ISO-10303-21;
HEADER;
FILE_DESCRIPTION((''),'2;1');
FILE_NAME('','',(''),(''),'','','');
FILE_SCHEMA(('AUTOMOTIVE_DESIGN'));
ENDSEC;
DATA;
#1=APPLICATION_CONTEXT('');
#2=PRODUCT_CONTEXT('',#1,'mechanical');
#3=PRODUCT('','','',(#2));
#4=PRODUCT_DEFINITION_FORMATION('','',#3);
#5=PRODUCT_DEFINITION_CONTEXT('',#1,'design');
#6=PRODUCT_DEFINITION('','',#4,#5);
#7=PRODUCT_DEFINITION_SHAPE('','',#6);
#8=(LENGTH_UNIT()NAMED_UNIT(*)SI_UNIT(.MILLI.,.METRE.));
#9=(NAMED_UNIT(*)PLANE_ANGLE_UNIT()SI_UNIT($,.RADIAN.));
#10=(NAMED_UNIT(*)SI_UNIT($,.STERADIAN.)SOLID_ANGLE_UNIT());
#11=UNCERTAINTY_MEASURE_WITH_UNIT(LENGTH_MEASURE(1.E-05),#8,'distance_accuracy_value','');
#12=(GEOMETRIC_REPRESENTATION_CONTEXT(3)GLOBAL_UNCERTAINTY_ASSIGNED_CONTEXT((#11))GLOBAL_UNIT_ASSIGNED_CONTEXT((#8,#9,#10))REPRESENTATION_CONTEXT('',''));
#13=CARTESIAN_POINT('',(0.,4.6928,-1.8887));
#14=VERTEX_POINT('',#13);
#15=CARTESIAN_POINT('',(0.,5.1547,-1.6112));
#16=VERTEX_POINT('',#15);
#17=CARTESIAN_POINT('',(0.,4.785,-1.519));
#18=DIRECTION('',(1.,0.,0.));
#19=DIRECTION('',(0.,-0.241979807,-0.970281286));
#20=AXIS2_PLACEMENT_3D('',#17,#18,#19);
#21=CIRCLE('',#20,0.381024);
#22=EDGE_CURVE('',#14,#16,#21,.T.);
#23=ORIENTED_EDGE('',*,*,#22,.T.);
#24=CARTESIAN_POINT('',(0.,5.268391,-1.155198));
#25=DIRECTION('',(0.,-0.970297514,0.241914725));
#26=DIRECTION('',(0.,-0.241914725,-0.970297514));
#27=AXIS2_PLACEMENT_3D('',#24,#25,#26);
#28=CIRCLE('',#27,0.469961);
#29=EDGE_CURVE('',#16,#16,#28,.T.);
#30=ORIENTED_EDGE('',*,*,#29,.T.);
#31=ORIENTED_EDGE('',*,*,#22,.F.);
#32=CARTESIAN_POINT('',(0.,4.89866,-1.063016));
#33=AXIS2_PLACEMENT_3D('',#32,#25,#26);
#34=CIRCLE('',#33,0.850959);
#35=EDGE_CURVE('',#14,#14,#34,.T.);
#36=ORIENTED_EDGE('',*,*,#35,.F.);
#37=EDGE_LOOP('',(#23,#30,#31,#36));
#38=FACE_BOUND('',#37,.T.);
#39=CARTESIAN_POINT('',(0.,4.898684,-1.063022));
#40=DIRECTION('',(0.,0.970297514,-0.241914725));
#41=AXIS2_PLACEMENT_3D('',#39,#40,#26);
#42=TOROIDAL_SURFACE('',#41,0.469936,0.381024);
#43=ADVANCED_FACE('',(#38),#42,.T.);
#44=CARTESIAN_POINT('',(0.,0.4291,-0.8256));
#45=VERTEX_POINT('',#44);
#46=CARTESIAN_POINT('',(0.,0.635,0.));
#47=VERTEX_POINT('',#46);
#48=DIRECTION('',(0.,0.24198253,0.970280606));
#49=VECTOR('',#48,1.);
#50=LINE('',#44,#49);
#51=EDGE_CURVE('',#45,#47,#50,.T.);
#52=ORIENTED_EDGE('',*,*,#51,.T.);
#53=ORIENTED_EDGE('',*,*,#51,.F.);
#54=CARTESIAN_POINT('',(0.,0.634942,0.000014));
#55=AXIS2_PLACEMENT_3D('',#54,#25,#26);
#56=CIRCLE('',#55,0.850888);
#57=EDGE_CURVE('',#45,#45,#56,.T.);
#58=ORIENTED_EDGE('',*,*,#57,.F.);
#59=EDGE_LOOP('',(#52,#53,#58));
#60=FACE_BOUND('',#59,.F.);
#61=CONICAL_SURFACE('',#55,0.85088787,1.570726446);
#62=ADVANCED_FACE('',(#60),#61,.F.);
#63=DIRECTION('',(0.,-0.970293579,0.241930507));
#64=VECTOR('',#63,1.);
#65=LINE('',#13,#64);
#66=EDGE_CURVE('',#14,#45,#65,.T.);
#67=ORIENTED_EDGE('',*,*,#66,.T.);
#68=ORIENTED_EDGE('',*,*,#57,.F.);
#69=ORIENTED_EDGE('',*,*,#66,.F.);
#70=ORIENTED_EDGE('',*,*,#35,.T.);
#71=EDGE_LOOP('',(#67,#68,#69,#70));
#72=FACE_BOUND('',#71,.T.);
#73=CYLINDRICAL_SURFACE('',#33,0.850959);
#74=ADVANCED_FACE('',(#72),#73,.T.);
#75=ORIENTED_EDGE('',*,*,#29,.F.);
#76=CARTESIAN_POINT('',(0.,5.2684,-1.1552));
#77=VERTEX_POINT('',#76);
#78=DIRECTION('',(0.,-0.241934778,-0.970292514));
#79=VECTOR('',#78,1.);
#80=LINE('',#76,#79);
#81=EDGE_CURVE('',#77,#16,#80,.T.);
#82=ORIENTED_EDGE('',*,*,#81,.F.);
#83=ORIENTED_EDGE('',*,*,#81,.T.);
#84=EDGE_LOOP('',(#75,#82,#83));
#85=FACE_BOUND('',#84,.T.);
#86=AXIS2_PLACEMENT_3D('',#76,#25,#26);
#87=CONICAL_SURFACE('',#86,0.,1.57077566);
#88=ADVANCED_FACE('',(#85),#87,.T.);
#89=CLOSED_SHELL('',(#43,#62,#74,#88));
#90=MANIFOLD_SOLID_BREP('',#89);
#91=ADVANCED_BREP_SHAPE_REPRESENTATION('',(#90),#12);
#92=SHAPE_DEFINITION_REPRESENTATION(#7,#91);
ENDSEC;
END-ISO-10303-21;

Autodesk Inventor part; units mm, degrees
sketch "Sketch_1" plane through (0, 0, 0) normal (1, 0, 0) x (0, 1, 0)
  line L0 (0.635, 0) -> (5.2684, -1.1552)
  line L1 (5.2684, -1.1552) -> (5.1547, -1.6112)
  arc A0 (4.6928, -1.8887) -> (5.1547, -1.6112) centre (4.785, -1.519) ccw
  line L2 (4.6928, -1.8887) -> (0.4291, -0.8256)
  line L3 (0.4291, -0.8256) -> (0.635, 0)
  line L4 (0.635, 0) -> (5.2684, -1.1552)
revolve "Revolution1" add sketch "Sketch_1" angle 360 about axis through (0, 0.635, 0) along (0, -0.9702957, 0.2419219)
ref_plane "to_body_XY" through (0, 0, 0) normal (0, 1, 0) x (1, 0, 0)
ref_plane "to_body_YZ" through (0, 0, 0) normal (1, 0, 0) x (0, 0, -1)
ref_plane "to_body_ZX" through (0, 0, 0) normal (0, 0, -1) x (0, 1, 0)
properties part number "G-actuator"
